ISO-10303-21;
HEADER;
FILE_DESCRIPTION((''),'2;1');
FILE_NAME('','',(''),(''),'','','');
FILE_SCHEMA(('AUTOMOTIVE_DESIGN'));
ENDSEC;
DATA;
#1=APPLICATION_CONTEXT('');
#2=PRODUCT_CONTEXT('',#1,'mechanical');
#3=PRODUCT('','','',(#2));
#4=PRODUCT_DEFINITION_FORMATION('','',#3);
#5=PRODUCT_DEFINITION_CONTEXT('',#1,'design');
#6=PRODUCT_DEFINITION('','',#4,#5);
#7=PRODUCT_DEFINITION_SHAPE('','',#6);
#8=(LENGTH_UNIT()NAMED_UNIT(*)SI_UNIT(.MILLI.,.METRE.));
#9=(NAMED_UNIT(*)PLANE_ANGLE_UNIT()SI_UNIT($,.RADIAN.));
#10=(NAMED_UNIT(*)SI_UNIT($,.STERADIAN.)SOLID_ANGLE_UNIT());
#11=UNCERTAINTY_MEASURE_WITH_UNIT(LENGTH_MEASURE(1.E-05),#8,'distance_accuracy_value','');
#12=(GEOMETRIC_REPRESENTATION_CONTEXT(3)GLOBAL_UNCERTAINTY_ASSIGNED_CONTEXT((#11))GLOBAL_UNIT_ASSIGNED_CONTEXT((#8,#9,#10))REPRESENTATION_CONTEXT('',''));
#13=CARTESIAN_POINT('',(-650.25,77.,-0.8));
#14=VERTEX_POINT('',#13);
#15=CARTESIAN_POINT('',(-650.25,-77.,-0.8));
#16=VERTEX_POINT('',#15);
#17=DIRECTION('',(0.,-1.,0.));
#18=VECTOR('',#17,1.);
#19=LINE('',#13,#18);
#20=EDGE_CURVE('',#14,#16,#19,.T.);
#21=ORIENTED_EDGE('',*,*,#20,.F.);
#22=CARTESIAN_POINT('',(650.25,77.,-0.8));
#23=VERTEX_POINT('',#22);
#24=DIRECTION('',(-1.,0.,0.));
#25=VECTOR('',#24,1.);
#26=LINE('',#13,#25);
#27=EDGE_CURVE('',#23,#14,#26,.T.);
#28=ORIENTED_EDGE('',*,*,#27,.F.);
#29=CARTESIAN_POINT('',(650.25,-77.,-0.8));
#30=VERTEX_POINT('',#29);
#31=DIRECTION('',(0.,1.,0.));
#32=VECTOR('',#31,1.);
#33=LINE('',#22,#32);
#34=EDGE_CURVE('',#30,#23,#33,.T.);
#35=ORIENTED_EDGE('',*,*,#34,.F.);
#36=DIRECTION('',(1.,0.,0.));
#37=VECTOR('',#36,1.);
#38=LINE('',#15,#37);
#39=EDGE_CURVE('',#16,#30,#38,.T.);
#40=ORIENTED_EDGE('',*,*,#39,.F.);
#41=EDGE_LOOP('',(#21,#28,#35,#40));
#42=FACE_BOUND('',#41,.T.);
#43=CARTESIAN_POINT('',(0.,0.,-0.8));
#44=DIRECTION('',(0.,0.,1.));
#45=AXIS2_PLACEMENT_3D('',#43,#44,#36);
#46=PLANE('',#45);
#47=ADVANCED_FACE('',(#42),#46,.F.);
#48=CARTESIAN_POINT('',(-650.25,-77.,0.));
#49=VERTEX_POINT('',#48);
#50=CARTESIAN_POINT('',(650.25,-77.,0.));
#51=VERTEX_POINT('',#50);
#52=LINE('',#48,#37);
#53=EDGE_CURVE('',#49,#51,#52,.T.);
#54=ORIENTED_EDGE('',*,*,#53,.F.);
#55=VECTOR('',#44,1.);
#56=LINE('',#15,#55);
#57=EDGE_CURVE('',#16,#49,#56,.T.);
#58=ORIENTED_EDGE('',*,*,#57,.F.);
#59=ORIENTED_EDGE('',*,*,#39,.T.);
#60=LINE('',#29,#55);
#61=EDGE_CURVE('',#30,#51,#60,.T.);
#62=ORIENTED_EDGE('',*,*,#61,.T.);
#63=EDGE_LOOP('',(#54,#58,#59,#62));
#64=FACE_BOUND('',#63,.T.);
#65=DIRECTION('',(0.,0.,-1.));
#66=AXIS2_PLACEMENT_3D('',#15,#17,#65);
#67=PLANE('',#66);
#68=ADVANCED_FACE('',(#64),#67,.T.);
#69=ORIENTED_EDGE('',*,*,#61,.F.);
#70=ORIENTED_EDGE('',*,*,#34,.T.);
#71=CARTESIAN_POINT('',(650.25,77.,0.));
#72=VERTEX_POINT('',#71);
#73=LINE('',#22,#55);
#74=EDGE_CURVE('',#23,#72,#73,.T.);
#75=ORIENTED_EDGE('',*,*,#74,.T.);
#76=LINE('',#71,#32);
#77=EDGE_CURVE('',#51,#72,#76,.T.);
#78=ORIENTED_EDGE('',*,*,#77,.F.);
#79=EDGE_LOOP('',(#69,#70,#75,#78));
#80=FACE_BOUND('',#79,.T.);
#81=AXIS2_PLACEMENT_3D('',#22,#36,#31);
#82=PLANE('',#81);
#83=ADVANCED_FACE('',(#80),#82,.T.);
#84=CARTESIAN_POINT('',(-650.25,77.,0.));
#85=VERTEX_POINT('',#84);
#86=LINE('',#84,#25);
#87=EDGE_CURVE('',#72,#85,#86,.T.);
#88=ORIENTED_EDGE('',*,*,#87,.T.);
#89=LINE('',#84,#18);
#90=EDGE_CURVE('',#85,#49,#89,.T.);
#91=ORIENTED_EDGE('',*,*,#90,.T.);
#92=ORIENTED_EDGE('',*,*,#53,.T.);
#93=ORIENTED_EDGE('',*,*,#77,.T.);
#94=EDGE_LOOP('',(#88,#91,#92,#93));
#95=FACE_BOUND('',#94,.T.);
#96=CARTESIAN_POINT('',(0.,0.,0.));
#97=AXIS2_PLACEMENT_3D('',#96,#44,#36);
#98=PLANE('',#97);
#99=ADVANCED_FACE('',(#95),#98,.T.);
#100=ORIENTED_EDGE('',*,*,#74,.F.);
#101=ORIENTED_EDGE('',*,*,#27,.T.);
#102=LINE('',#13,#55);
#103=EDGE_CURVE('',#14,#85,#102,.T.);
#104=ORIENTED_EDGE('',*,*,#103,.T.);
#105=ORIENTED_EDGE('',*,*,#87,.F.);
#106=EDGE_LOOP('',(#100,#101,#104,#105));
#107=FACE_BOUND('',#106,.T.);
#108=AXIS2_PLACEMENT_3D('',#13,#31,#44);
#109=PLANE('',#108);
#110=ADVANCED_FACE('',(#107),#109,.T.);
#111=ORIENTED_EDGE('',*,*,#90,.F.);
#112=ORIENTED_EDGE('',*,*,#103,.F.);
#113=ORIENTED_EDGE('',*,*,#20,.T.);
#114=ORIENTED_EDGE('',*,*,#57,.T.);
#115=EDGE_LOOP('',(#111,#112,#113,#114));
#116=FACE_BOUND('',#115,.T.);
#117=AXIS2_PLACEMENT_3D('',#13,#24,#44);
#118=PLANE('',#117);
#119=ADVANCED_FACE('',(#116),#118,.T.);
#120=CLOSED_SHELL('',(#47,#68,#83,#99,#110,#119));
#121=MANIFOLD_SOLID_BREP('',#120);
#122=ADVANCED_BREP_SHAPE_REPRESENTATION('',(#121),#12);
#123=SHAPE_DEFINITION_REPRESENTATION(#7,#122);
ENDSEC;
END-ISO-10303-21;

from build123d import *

# Parameters (mm, degrees)
SKETCH_1_W             = 1300.5
SKETCH_1_H             = 154
SM_BASE_FLANGE_1_DEPTH = 0.8


# Sheet-metal steps are written as plain solids
with BuildPart() as part:
    # Sketch 1 → 基体-法兰1 (new body)
    with BuildSketch(Plane.XY):
        Rectangle(SKETCH_1_W, SKETCH_1_H)
    extrude(amount=-SM_BASE_FLANGE_1_DEPTH)


solid = part.part
